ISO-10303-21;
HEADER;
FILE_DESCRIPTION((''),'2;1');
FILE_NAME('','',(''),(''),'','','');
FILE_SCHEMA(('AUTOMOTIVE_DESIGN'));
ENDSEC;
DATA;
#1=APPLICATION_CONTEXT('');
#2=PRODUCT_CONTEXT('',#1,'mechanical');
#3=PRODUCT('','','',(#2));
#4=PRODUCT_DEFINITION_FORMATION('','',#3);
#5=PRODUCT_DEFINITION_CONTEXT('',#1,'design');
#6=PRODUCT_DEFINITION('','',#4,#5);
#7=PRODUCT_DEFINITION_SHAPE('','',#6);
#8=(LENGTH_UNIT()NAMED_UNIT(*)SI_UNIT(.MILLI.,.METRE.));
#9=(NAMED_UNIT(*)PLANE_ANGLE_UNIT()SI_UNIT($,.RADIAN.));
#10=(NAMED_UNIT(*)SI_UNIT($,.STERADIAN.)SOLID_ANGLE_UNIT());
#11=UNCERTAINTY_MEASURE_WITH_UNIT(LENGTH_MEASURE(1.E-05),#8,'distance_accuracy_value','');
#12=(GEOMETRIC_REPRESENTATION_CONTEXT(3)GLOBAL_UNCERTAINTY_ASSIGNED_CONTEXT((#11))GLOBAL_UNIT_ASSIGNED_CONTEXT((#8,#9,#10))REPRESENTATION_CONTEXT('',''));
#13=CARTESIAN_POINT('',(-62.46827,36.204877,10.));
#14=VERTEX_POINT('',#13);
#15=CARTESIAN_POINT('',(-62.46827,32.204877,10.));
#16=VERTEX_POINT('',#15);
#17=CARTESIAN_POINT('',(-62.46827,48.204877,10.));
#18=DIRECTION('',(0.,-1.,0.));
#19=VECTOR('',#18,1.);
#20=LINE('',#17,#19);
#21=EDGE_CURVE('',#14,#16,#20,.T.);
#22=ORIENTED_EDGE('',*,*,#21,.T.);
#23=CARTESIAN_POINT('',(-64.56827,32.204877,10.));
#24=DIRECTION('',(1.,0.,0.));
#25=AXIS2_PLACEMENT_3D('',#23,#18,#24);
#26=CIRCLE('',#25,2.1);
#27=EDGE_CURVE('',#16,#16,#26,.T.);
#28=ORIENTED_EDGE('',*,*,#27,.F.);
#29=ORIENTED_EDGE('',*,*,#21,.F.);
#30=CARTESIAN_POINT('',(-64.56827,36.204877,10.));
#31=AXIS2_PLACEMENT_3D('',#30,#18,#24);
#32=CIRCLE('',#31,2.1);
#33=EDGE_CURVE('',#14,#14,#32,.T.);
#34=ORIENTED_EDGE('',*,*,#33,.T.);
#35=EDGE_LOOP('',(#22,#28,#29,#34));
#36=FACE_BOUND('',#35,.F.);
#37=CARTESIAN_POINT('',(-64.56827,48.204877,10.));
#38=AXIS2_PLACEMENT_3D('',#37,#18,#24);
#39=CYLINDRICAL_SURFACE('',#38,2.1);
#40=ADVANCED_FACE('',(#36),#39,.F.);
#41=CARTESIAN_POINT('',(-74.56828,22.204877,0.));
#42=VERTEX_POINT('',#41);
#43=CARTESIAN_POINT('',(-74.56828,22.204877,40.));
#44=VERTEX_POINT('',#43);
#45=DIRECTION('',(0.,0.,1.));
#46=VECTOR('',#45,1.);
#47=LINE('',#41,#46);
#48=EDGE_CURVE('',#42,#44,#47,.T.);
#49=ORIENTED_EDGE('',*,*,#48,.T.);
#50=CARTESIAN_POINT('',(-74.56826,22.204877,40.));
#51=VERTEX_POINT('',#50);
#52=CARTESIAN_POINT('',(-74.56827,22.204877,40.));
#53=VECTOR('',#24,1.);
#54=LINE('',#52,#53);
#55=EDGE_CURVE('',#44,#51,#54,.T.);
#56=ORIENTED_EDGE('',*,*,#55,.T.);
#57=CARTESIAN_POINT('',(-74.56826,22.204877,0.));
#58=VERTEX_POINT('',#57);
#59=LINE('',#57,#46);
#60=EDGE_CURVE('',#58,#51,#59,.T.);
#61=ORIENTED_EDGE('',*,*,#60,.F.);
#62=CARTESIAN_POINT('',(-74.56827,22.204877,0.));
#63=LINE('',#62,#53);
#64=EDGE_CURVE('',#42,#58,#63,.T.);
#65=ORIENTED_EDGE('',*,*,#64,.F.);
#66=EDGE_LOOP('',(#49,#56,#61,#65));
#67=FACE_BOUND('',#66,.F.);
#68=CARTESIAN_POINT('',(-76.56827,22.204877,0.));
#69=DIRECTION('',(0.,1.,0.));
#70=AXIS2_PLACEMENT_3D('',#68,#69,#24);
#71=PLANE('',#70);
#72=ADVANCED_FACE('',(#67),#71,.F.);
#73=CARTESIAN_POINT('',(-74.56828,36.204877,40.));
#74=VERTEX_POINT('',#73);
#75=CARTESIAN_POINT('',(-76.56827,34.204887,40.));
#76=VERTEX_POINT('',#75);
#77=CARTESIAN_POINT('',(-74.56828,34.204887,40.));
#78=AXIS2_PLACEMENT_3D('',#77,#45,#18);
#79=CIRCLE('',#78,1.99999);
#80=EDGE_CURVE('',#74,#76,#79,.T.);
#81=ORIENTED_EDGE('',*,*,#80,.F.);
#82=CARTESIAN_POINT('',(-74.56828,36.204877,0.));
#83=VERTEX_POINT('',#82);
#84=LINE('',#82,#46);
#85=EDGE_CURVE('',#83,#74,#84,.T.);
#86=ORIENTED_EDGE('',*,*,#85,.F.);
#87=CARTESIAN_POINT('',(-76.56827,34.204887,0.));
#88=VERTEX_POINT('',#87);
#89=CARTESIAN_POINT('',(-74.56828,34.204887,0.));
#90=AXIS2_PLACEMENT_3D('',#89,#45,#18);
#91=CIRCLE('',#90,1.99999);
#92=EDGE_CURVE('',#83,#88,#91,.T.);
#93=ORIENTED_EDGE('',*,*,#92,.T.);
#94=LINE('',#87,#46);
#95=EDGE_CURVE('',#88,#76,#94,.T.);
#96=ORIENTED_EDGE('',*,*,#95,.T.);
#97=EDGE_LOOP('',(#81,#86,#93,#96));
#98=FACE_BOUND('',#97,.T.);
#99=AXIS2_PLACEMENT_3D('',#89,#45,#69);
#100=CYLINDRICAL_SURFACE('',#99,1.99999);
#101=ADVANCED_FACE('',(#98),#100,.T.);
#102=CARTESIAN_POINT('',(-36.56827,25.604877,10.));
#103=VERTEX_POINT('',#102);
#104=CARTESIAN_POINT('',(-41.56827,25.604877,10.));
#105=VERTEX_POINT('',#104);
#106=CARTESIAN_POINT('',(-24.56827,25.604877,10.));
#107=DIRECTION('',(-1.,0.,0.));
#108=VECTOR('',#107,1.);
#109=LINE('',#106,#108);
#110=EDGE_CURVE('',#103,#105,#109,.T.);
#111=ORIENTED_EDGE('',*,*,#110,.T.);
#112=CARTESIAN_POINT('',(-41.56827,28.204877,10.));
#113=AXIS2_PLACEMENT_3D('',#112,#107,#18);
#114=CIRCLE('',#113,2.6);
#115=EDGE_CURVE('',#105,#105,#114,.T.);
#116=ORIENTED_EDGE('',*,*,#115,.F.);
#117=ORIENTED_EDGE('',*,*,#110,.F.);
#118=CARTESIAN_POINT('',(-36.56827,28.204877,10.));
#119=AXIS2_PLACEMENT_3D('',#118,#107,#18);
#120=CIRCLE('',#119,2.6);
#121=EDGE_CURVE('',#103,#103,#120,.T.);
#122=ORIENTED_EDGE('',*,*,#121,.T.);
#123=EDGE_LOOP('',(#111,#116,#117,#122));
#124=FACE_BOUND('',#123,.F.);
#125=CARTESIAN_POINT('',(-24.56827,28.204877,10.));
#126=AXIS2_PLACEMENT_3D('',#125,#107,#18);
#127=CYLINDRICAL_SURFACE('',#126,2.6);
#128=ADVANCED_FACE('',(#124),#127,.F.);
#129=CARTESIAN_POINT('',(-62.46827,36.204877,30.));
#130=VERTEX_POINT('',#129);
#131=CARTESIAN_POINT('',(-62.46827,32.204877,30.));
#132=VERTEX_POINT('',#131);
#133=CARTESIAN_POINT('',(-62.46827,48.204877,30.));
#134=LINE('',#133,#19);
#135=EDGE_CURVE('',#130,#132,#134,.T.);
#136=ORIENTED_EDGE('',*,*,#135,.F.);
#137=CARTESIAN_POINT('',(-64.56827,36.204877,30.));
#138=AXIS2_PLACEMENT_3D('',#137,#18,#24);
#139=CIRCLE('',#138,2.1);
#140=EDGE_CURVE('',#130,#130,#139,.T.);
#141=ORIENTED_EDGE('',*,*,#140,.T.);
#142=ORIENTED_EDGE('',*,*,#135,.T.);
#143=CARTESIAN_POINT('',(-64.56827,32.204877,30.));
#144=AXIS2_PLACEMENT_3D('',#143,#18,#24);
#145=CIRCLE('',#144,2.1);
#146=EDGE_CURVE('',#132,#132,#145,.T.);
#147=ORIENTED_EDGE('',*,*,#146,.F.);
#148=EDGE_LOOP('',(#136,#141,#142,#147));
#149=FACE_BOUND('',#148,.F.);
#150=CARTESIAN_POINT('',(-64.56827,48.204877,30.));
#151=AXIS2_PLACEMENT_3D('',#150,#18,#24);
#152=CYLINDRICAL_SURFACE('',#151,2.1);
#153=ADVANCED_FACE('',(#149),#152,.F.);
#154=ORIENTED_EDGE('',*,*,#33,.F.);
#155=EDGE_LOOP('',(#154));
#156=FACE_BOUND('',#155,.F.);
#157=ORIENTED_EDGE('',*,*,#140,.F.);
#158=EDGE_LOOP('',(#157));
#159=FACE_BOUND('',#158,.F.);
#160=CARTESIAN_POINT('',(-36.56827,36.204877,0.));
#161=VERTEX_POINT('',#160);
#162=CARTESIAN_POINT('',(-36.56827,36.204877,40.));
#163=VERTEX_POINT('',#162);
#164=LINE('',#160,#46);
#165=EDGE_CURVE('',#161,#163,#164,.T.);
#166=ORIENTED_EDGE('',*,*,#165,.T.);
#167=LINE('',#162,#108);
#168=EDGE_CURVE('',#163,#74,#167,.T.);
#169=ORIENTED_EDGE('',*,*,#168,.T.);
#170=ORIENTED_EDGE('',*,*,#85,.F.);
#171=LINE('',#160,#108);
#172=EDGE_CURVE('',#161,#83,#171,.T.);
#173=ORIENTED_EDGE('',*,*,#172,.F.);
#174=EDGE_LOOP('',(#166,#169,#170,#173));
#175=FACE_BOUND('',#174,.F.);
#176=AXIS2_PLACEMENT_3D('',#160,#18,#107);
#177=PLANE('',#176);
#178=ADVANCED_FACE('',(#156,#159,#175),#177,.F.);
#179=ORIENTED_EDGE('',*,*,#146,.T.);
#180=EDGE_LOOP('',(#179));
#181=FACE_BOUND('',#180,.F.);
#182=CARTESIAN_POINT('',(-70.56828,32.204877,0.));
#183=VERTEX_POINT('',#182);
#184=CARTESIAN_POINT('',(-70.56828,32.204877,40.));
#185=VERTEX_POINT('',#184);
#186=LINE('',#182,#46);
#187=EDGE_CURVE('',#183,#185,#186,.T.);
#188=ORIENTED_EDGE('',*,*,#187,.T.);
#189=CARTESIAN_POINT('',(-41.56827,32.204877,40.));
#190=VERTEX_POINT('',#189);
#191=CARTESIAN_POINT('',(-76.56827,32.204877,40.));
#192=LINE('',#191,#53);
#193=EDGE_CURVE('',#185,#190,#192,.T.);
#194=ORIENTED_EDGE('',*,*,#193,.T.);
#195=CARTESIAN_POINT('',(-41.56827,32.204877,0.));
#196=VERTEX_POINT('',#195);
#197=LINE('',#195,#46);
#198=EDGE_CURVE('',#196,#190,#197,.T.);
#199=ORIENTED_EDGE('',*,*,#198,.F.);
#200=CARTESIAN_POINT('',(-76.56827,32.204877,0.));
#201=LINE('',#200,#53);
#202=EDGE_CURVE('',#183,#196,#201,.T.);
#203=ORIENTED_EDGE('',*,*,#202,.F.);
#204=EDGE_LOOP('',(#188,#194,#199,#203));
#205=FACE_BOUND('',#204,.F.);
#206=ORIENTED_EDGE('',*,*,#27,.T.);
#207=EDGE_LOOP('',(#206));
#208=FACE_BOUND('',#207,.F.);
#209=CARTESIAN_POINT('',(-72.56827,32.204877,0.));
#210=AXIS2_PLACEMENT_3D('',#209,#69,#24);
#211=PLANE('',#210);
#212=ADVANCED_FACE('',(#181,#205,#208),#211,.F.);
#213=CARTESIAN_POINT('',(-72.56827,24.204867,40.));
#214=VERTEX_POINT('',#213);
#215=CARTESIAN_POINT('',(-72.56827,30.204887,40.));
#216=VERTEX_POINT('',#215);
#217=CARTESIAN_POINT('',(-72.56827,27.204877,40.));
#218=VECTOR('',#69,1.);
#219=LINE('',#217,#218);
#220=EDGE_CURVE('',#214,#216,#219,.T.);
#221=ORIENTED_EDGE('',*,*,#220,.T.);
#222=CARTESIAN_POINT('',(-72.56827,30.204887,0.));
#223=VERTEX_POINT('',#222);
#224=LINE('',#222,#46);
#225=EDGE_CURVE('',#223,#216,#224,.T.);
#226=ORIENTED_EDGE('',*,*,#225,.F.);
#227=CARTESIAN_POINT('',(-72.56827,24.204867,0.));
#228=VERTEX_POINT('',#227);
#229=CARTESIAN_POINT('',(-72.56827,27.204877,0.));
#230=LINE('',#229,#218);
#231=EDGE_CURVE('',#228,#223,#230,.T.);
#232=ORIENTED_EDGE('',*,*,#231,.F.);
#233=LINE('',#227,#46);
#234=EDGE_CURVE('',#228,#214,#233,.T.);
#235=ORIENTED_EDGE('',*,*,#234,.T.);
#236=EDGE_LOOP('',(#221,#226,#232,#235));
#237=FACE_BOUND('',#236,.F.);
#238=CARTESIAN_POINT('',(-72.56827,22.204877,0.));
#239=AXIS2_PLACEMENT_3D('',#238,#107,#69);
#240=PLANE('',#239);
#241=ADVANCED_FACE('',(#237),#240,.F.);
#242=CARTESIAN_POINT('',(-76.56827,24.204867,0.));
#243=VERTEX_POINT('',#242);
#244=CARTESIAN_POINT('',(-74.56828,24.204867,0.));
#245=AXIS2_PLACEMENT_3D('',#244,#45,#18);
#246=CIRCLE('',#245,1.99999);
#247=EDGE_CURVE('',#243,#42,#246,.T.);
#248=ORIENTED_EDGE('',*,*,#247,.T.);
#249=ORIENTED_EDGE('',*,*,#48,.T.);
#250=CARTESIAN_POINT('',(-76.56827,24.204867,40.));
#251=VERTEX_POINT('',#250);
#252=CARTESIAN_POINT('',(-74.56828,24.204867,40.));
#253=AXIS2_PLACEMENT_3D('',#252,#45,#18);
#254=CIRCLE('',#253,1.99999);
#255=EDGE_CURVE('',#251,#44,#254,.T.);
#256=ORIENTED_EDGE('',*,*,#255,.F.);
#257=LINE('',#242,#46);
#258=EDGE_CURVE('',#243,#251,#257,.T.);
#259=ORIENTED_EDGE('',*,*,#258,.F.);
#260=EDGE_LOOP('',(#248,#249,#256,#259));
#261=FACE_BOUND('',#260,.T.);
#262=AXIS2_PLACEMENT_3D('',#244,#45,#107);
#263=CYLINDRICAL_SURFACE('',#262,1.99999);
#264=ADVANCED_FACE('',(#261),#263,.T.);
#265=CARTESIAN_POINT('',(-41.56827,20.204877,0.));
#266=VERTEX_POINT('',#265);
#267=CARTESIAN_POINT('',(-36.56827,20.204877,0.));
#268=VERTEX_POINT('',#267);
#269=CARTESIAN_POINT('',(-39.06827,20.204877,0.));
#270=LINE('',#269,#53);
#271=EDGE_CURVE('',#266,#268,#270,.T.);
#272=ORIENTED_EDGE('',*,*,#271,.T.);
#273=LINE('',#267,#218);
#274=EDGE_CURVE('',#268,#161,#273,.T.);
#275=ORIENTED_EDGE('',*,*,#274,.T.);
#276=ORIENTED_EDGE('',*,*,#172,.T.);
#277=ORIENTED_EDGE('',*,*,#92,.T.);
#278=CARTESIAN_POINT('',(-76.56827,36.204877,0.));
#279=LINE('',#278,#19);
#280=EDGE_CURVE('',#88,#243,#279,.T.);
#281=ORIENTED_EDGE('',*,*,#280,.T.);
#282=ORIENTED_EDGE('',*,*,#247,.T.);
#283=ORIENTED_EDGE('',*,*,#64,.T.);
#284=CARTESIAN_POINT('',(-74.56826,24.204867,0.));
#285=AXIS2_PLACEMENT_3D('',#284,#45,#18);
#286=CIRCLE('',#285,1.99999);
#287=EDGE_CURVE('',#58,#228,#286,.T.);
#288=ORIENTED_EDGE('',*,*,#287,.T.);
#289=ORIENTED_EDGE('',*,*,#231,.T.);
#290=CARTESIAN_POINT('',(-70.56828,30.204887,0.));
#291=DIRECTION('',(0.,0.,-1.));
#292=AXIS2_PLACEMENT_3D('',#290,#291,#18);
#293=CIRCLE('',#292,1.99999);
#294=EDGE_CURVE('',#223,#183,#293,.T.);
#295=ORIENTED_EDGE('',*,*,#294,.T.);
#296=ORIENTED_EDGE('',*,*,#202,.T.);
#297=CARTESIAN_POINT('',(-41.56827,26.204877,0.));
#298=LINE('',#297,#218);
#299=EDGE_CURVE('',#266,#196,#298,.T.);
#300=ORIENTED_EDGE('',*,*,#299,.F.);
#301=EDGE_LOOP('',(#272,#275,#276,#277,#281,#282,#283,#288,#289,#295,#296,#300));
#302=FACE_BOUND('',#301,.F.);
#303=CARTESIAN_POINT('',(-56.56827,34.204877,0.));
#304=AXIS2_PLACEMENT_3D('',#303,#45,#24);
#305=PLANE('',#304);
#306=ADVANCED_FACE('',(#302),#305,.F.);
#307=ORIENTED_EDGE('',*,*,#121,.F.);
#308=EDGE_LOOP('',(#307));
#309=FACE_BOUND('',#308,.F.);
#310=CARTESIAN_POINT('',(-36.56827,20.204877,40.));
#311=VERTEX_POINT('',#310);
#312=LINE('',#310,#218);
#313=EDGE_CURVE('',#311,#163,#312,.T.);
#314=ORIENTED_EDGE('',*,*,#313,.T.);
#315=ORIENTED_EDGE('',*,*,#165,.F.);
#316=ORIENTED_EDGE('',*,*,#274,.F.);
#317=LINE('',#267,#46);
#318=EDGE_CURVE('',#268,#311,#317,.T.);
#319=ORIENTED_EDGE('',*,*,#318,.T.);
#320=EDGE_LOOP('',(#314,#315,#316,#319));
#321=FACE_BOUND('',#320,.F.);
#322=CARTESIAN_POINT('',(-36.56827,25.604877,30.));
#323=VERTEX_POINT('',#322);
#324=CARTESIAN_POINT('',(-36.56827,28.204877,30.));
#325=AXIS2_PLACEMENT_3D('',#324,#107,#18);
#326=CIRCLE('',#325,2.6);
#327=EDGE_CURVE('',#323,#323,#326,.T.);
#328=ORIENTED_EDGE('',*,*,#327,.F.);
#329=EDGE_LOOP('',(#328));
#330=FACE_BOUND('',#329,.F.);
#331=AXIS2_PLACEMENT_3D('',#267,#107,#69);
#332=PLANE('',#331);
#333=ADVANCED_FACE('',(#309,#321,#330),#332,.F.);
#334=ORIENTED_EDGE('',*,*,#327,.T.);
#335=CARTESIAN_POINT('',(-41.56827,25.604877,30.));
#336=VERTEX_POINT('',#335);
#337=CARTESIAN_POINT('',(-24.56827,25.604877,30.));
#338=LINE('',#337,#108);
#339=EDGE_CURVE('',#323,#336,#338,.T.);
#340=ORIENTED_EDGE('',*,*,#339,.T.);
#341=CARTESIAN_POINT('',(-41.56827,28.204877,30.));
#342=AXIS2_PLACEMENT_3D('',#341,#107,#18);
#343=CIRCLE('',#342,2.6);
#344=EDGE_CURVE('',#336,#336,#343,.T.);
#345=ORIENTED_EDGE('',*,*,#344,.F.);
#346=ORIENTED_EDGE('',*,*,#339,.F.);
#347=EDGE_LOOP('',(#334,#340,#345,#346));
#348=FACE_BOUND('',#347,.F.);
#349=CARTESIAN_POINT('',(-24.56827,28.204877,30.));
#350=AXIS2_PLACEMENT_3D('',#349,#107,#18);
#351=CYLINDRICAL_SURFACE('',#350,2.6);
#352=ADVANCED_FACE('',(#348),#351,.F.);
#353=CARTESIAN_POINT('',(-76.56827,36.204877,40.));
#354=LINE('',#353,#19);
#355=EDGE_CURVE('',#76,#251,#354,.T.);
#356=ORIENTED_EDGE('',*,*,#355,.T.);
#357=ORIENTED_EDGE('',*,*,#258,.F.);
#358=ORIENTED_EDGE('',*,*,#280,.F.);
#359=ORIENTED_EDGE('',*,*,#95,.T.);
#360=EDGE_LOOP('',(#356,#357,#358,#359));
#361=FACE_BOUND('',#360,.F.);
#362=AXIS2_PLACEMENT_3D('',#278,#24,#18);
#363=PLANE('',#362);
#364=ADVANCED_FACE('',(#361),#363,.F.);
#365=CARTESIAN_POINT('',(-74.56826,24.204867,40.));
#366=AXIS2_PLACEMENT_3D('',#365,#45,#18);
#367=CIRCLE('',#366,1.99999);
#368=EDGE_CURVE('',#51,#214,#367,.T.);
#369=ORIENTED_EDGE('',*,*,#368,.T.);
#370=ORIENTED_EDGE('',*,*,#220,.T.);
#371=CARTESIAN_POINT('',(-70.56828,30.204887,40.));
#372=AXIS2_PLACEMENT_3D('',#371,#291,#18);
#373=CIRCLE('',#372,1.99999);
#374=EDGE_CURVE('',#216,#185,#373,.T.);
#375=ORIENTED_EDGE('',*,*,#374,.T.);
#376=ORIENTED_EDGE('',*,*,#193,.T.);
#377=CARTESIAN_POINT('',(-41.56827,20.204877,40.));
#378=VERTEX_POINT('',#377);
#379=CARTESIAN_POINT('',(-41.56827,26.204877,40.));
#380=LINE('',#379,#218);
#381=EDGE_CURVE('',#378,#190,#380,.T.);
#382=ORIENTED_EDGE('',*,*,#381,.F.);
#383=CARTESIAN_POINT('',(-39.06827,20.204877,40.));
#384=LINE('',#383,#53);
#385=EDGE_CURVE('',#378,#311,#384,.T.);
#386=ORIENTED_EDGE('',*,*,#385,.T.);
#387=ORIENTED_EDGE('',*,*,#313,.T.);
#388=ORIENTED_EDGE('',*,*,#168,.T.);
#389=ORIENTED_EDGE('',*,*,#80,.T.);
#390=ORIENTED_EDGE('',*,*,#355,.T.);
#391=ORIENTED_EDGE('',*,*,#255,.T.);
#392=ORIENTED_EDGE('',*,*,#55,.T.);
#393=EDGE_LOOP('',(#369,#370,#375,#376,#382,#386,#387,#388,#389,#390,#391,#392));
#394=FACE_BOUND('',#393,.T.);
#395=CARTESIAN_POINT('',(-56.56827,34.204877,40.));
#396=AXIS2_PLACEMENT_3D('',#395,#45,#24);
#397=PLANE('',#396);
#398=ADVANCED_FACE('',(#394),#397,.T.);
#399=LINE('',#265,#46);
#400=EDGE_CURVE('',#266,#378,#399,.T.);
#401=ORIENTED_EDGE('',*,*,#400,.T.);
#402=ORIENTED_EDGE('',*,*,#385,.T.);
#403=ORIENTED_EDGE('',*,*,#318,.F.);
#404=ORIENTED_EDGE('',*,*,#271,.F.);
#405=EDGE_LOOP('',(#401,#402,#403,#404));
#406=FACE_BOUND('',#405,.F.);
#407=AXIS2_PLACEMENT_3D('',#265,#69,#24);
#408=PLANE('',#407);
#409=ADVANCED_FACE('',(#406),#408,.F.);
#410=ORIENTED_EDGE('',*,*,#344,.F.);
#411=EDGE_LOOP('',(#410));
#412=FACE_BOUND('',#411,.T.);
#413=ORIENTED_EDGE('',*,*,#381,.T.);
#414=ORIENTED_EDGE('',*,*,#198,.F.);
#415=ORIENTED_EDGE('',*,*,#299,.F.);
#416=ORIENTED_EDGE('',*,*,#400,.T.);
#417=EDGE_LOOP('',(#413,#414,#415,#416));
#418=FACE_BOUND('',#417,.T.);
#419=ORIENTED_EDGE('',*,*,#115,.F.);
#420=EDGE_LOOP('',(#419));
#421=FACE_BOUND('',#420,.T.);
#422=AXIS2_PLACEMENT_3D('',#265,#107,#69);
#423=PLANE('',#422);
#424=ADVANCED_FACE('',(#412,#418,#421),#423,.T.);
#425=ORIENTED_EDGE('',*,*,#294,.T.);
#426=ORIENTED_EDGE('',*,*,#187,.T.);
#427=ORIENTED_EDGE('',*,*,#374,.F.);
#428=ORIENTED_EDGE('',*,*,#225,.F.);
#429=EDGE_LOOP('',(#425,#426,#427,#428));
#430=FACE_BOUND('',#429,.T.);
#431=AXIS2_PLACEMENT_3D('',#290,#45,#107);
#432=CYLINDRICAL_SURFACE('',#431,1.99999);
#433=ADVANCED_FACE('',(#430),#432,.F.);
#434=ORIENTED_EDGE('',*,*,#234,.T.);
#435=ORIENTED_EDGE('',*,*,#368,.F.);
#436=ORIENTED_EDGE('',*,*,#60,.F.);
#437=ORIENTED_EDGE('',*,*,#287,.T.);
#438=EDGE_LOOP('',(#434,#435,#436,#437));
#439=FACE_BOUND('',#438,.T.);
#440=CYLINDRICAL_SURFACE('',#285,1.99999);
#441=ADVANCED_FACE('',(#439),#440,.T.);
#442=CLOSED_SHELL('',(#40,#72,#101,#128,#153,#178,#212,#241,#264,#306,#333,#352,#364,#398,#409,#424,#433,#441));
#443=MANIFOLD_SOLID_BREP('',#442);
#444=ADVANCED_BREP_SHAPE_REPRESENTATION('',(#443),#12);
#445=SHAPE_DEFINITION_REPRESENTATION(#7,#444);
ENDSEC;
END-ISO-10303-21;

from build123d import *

# Parameters (mm, degrees)
F0_W     = 4
F0_H     = 10
F0_W_2   = 5
F0_H_2   = 12
F1_DEPTH = 40
F3_R     = 1.99999
F4_D     = 5.2
F4_DEPTH = 12
F4_TIP   = 1.5622376095
F6_D     = 4.2
F6_DEPTH = 12
F6_TIP   = 1.2618073


# Not quite as in the source:
# - a fillet or chamfer is up to 0.001 mm smaller than in the source, because OpenCascade refuses the exact size


with BuildPart() as f1:
    # F0 (on Top) → F1 (new body)
    with BuildSketch(Plane.XY):
        Polygon((-36.5682695345, 36.2048765272), (-76.5682695345, 36.2048765272), (-76.5682695345, 32.2048765272), (-72.5682695345, 32.2048765272), (-41.5682695345, 32.2048765272), (-36.5682695345, 32.2048765272), align=None)
        with Locations((-74.5682695345, 27.2048765272)):
            Rectangle(F0_W, F0_H)
        with Locations((-39.0682695345, 26.2048765272)):
            Rectangle(F0_W_2, F0_H_2)
    extrude(amount=F1_DEPTH)

    # F3 (radius 2 in the source; OpenCascade refuses exactly that, so slightly less here)
    f3_edges = [f1.edges().sort_by_distance(p)[0] for p in [
        (-76.56827, 36.204877, 20),
        (-72.56827, 32.204877, 20),
        (-76.56827, 22.204877, 20),
        (-72.56827, 22.204877, 20),
    ]]
    fillet(f3_edges, radius=F3_R)

    # F4
    with Locations(Plane.YZ.offset(-36.5682695345)):
        with Locations((28.2048765272, 10), (28.2048765272, 30)):
            Hole(F4_D / 2, depth=F4_DEPTH)
            with Locations((0, 0, -(F4_DEPTH + F4_TIP / 2))):  # 118° drill point
                Cone(0, F4_D / 2, F4_TIP, mode=Mode.SUBTRACT)

    # F6
    with Locations(Plane(origin=(0, 36.2048765272, 0), x_dir=(-1, 0, 0), z_dir=(0, 1, 0))):
        with Locations((64.5682695345, 10), (64.5682695345, 30)):
            Hole(F6_D / 2, depth=F6_DEPTH)
            with Locations((0, 0, -(F6_DEPTH + F6_TIP / 2))):  # 118° drill point
                Cone(0, F6_D / 2, F6_TIP, mode=Mode.SUBTRACT)


solid = f1.part
